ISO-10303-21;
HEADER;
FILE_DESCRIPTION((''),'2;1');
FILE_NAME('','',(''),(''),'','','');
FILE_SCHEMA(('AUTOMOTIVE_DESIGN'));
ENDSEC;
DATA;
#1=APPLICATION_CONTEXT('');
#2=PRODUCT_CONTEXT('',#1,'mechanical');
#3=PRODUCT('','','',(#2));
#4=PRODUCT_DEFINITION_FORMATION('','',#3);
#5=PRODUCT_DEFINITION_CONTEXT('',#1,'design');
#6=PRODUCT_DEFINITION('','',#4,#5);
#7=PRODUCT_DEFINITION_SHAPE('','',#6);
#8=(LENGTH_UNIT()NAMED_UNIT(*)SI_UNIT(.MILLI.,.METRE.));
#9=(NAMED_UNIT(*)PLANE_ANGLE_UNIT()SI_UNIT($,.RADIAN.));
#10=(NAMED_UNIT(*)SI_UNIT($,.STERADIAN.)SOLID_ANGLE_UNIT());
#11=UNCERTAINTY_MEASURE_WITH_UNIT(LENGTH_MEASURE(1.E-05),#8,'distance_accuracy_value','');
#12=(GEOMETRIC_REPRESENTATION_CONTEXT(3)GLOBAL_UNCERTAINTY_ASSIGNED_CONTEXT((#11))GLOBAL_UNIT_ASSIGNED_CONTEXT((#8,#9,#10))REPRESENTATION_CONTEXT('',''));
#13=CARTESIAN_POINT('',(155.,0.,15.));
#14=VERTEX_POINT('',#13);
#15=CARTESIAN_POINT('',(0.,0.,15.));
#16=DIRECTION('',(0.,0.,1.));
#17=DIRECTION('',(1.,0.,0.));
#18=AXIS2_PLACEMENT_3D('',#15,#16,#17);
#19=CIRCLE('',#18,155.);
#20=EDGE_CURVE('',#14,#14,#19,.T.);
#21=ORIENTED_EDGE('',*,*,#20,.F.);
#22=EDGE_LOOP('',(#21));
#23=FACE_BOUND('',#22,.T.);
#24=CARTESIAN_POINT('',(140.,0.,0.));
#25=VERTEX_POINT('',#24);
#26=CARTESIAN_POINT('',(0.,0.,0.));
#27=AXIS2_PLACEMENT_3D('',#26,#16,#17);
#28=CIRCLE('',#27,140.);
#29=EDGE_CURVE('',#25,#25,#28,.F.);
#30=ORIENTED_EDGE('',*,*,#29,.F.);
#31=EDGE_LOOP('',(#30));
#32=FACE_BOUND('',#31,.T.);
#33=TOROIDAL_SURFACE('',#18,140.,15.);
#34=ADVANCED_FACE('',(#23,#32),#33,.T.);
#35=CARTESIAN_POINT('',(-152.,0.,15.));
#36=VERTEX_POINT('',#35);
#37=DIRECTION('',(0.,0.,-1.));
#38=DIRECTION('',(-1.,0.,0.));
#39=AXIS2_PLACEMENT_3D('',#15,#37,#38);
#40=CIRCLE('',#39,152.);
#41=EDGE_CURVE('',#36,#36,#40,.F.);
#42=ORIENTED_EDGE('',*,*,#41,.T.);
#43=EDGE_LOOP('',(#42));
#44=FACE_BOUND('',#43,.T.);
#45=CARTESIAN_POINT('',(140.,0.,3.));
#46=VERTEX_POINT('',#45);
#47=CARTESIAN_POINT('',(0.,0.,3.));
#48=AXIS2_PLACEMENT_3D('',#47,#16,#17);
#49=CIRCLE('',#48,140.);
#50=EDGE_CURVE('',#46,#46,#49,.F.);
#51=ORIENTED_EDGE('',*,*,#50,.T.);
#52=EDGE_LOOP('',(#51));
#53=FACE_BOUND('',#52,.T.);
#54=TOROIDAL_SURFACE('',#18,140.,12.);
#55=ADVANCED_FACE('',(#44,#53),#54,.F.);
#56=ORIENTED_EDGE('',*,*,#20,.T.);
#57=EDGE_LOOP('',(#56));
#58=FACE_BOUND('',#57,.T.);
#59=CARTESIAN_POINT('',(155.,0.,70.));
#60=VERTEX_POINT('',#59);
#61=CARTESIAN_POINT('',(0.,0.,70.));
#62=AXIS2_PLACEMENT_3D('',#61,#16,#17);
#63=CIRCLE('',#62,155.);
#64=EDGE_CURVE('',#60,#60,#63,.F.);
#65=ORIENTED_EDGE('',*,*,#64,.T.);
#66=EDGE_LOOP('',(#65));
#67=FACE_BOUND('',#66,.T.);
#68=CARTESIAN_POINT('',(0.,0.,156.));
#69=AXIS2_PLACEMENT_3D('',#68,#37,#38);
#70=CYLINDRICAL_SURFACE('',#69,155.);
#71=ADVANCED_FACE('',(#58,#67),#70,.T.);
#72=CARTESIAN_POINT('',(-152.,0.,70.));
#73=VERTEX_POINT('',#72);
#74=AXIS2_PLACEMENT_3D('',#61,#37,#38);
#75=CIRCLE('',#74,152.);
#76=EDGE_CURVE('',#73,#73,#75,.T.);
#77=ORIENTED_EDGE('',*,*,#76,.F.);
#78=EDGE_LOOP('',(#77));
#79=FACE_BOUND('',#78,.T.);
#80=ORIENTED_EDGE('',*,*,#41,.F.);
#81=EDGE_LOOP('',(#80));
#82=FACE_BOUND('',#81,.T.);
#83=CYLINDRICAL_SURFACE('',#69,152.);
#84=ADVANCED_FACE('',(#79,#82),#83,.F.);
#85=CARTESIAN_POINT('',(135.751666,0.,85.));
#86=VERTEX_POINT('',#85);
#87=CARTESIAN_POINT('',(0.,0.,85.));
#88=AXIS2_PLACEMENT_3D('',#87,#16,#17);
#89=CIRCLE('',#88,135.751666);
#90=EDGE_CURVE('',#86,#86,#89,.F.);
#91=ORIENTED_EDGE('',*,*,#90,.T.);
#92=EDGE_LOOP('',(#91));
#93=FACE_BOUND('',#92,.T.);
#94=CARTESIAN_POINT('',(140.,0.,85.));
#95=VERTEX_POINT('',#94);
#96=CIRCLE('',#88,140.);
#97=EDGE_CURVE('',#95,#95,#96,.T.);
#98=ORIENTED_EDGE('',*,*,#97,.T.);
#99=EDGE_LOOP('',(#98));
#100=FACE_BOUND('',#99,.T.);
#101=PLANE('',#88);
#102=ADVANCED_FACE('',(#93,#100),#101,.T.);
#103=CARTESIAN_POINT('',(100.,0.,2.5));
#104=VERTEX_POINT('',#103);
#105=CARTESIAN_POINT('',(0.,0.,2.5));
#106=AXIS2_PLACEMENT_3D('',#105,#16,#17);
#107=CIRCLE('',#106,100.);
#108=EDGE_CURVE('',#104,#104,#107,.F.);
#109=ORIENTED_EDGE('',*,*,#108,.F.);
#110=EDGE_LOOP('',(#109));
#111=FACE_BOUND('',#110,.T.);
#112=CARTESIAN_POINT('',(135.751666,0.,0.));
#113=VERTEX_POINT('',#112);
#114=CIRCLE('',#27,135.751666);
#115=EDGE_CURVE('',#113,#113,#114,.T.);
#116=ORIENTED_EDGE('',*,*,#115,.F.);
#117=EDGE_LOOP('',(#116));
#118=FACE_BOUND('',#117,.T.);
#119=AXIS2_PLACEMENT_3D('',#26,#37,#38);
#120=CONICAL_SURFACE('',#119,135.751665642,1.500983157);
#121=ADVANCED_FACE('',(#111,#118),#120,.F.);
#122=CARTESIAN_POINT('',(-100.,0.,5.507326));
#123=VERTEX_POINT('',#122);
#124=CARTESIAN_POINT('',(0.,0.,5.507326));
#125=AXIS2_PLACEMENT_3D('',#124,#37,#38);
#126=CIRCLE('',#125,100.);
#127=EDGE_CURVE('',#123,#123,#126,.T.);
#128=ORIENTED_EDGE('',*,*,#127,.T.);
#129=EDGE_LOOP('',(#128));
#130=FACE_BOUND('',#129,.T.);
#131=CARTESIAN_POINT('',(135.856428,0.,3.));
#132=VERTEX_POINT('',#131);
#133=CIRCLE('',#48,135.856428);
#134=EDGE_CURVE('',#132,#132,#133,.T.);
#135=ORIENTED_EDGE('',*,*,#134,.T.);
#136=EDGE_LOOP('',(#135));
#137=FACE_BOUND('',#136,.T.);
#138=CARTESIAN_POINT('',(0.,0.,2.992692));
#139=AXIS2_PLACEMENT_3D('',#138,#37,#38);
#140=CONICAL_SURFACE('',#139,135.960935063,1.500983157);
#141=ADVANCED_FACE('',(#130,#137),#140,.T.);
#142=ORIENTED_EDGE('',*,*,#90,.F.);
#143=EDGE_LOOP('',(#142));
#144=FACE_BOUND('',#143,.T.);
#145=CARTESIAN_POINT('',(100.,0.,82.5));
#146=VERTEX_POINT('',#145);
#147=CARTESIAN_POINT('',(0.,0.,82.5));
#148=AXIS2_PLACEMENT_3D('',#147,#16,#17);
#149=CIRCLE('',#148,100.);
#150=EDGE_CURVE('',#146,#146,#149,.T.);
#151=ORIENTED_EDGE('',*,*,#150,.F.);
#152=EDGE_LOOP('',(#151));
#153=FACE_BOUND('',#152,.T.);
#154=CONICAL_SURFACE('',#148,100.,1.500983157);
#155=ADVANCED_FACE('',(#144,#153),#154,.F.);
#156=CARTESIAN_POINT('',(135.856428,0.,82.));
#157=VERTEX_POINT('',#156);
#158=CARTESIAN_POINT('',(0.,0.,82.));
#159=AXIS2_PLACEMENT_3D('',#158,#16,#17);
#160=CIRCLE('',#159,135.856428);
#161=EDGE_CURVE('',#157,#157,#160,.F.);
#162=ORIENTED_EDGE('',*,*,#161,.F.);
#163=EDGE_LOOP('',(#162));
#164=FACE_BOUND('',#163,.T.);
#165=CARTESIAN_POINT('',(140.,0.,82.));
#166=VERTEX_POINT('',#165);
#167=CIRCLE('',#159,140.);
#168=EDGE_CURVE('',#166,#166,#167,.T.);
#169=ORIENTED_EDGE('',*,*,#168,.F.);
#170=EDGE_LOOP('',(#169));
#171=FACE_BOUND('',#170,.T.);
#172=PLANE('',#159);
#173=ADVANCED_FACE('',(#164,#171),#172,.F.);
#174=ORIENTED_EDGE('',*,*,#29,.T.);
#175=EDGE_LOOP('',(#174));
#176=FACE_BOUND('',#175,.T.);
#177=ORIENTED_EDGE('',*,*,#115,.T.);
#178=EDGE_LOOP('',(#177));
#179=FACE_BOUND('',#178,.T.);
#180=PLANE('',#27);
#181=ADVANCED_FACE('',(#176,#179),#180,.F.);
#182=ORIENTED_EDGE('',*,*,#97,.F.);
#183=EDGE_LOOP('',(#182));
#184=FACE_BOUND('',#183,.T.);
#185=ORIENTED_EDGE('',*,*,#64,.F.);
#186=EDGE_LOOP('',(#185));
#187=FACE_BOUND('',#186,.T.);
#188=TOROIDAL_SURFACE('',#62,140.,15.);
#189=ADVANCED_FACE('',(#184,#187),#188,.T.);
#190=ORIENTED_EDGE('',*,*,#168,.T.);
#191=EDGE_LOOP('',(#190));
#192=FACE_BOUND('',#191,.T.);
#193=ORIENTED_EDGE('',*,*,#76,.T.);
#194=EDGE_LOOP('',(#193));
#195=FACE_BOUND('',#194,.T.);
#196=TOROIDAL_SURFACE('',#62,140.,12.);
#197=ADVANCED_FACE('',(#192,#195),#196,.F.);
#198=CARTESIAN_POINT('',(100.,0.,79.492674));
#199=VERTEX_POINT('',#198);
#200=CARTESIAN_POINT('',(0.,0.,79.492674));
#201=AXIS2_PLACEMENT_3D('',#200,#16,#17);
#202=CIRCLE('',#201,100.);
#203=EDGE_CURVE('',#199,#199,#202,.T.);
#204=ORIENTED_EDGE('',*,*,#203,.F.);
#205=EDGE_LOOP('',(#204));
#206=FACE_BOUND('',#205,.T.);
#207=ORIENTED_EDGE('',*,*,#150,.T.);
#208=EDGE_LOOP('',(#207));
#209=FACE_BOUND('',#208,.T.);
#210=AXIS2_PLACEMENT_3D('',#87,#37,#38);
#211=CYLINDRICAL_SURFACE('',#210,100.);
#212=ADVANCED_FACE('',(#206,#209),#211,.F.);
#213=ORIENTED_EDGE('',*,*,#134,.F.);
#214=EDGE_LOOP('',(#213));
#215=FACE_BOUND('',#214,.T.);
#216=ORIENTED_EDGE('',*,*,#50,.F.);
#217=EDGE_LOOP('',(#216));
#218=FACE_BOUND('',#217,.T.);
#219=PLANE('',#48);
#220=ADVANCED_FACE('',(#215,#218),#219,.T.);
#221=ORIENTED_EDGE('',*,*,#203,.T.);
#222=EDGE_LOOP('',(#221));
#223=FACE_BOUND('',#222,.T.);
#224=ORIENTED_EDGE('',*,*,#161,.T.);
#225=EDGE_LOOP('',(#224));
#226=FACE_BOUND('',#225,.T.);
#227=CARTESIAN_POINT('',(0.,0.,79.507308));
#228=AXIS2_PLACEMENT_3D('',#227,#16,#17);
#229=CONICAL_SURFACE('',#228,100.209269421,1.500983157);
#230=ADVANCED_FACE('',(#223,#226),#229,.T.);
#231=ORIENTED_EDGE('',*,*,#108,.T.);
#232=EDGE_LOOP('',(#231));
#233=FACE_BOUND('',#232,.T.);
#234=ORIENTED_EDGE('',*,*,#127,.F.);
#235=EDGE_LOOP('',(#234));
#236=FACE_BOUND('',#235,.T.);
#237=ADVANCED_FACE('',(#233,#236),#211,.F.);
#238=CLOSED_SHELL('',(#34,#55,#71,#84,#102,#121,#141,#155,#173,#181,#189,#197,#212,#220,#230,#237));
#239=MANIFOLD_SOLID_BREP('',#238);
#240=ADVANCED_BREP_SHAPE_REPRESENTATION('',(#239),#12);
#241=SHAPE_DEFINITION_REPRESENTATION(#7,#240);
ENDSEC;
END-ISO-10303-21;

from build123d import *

# Parameters (mm, degrees)
SKETCH_1_R          = 175
SKETCH_1_R_2        = 100
EXTRUDE_1_DEPTH     = 85
CHAMFER_1_SIZE      = 2.5
CHAMFER_1_SIZE2     = 35.751665642
CHAMFER_2_SIZE      = 2.5
CHAMFER_2_SIZE2     = 35.751665642
FILLET_1_R          = 20
SKETCH_4_R          = 243.967557574
SKETCH_4_R_2        = 155
CUT_EXTRUDE_3_DEPTH = 156
FILLET_2_R          = 15


# Read off the part's stored shape, not the designer's step: 抽壳2
with BuildPart() as part:
    # 草图1 → 凸台-拉伸1 (new body)
    with BuildSketch(Plane.XY):
        Circle(SKETCH_1_R)
        Circle(SKETCH_1_R_2, mode=Mode.SUBTRACT)
    extrude(amount=EXTRUDE_1_DEPTH)

    # 倒角1
    chamfer_1_edges = [part.edges().sort_by_distance(p)[0] for p in [
        (-100, 0, 85),
    ]]
    chamfer_1_side = [part.faces().sort_by_distance(p)[0] for p in [
        (-100, 0, 42.5),
    ]]
    chamfer(chamfer_1_edges, length=CHAMFER_1_SIZE, length2=CHAMFER_1_SIZE2, reference=chamfer_1_side[0])

    # 倒角2
    chamfer_2_edges = [part.edges().sort_by_distance(p)[0] for p in [
        (-100, 0, 0),
    ]]
    chamfer_2_side = [part.faces().sort_by_distance(p)[0] for p in [
        (-100, 0, 41.25),
    ]]
    chamfer(chamfer_2_edges, length=CHAMFER_2_SIZE, length2=CHAMFER_2_SIZE2, reference=chamfer_2_side[0])

    # 圆角1
    fillet_1_edges = [part.edges().sort_by_distance(p)[0] for p in [
        (-175, 0, 0),
        (-175, 0, 85),
    ]]
    fillet(fillet_1_edges, radius=FILLET_1_R)

    # 草图4 → 切除-拉伸3 (cut)
    with BuildSketch(Plane(origin=(0, 0, 0), x_dir=(-1, 0, 0), z_dir=(0, 0, -1))):
        Circle(SKETCH_4_R)
        Circle(SKETCH_4_R_2, mode=Mode.SUBTRACT)
    extrude(amount=-CUT_EXTRUDE_3_DEPTH, mode=Mode.SUBTRACT)

    # 圆角2
    fillet_2_edges = [part.edges().sort_by_distance(p)[0] for p in [
        (155, 0, 85),
        (155, 0, 0),
    ]]
    fillet(fillet_2_edges, radius=FILLET_2_R)

    # 抽壳2 outline → 抽壳2 (revolve, cut)
    with BuildSketch(Plane.XZ):
        with BuildLine():
            Line((140, 82), (135.85642795, 82))
            Line((135.85642795, 82), (100, 79.492674306))
            Line((100, 79.492674306), (100, 5.507325694))
            Line((100, 5.507325694), (135.85642795, 3))
            Line((135.85642795, 3), (140, 3))
            ThreePointArc((140, 3), (148.485281374, 6.514718626), (152, 15))
            Line((152, 15), (152, 70))
            ThreePointArc((152, 70), (148.485281374, 78.485281374), (140, 82))
        make_face()
    revolve(axis=Axis((0, 0, 0), (0, 0, 1)), mode=Mode.SUBTRACT)


solid = part.part
